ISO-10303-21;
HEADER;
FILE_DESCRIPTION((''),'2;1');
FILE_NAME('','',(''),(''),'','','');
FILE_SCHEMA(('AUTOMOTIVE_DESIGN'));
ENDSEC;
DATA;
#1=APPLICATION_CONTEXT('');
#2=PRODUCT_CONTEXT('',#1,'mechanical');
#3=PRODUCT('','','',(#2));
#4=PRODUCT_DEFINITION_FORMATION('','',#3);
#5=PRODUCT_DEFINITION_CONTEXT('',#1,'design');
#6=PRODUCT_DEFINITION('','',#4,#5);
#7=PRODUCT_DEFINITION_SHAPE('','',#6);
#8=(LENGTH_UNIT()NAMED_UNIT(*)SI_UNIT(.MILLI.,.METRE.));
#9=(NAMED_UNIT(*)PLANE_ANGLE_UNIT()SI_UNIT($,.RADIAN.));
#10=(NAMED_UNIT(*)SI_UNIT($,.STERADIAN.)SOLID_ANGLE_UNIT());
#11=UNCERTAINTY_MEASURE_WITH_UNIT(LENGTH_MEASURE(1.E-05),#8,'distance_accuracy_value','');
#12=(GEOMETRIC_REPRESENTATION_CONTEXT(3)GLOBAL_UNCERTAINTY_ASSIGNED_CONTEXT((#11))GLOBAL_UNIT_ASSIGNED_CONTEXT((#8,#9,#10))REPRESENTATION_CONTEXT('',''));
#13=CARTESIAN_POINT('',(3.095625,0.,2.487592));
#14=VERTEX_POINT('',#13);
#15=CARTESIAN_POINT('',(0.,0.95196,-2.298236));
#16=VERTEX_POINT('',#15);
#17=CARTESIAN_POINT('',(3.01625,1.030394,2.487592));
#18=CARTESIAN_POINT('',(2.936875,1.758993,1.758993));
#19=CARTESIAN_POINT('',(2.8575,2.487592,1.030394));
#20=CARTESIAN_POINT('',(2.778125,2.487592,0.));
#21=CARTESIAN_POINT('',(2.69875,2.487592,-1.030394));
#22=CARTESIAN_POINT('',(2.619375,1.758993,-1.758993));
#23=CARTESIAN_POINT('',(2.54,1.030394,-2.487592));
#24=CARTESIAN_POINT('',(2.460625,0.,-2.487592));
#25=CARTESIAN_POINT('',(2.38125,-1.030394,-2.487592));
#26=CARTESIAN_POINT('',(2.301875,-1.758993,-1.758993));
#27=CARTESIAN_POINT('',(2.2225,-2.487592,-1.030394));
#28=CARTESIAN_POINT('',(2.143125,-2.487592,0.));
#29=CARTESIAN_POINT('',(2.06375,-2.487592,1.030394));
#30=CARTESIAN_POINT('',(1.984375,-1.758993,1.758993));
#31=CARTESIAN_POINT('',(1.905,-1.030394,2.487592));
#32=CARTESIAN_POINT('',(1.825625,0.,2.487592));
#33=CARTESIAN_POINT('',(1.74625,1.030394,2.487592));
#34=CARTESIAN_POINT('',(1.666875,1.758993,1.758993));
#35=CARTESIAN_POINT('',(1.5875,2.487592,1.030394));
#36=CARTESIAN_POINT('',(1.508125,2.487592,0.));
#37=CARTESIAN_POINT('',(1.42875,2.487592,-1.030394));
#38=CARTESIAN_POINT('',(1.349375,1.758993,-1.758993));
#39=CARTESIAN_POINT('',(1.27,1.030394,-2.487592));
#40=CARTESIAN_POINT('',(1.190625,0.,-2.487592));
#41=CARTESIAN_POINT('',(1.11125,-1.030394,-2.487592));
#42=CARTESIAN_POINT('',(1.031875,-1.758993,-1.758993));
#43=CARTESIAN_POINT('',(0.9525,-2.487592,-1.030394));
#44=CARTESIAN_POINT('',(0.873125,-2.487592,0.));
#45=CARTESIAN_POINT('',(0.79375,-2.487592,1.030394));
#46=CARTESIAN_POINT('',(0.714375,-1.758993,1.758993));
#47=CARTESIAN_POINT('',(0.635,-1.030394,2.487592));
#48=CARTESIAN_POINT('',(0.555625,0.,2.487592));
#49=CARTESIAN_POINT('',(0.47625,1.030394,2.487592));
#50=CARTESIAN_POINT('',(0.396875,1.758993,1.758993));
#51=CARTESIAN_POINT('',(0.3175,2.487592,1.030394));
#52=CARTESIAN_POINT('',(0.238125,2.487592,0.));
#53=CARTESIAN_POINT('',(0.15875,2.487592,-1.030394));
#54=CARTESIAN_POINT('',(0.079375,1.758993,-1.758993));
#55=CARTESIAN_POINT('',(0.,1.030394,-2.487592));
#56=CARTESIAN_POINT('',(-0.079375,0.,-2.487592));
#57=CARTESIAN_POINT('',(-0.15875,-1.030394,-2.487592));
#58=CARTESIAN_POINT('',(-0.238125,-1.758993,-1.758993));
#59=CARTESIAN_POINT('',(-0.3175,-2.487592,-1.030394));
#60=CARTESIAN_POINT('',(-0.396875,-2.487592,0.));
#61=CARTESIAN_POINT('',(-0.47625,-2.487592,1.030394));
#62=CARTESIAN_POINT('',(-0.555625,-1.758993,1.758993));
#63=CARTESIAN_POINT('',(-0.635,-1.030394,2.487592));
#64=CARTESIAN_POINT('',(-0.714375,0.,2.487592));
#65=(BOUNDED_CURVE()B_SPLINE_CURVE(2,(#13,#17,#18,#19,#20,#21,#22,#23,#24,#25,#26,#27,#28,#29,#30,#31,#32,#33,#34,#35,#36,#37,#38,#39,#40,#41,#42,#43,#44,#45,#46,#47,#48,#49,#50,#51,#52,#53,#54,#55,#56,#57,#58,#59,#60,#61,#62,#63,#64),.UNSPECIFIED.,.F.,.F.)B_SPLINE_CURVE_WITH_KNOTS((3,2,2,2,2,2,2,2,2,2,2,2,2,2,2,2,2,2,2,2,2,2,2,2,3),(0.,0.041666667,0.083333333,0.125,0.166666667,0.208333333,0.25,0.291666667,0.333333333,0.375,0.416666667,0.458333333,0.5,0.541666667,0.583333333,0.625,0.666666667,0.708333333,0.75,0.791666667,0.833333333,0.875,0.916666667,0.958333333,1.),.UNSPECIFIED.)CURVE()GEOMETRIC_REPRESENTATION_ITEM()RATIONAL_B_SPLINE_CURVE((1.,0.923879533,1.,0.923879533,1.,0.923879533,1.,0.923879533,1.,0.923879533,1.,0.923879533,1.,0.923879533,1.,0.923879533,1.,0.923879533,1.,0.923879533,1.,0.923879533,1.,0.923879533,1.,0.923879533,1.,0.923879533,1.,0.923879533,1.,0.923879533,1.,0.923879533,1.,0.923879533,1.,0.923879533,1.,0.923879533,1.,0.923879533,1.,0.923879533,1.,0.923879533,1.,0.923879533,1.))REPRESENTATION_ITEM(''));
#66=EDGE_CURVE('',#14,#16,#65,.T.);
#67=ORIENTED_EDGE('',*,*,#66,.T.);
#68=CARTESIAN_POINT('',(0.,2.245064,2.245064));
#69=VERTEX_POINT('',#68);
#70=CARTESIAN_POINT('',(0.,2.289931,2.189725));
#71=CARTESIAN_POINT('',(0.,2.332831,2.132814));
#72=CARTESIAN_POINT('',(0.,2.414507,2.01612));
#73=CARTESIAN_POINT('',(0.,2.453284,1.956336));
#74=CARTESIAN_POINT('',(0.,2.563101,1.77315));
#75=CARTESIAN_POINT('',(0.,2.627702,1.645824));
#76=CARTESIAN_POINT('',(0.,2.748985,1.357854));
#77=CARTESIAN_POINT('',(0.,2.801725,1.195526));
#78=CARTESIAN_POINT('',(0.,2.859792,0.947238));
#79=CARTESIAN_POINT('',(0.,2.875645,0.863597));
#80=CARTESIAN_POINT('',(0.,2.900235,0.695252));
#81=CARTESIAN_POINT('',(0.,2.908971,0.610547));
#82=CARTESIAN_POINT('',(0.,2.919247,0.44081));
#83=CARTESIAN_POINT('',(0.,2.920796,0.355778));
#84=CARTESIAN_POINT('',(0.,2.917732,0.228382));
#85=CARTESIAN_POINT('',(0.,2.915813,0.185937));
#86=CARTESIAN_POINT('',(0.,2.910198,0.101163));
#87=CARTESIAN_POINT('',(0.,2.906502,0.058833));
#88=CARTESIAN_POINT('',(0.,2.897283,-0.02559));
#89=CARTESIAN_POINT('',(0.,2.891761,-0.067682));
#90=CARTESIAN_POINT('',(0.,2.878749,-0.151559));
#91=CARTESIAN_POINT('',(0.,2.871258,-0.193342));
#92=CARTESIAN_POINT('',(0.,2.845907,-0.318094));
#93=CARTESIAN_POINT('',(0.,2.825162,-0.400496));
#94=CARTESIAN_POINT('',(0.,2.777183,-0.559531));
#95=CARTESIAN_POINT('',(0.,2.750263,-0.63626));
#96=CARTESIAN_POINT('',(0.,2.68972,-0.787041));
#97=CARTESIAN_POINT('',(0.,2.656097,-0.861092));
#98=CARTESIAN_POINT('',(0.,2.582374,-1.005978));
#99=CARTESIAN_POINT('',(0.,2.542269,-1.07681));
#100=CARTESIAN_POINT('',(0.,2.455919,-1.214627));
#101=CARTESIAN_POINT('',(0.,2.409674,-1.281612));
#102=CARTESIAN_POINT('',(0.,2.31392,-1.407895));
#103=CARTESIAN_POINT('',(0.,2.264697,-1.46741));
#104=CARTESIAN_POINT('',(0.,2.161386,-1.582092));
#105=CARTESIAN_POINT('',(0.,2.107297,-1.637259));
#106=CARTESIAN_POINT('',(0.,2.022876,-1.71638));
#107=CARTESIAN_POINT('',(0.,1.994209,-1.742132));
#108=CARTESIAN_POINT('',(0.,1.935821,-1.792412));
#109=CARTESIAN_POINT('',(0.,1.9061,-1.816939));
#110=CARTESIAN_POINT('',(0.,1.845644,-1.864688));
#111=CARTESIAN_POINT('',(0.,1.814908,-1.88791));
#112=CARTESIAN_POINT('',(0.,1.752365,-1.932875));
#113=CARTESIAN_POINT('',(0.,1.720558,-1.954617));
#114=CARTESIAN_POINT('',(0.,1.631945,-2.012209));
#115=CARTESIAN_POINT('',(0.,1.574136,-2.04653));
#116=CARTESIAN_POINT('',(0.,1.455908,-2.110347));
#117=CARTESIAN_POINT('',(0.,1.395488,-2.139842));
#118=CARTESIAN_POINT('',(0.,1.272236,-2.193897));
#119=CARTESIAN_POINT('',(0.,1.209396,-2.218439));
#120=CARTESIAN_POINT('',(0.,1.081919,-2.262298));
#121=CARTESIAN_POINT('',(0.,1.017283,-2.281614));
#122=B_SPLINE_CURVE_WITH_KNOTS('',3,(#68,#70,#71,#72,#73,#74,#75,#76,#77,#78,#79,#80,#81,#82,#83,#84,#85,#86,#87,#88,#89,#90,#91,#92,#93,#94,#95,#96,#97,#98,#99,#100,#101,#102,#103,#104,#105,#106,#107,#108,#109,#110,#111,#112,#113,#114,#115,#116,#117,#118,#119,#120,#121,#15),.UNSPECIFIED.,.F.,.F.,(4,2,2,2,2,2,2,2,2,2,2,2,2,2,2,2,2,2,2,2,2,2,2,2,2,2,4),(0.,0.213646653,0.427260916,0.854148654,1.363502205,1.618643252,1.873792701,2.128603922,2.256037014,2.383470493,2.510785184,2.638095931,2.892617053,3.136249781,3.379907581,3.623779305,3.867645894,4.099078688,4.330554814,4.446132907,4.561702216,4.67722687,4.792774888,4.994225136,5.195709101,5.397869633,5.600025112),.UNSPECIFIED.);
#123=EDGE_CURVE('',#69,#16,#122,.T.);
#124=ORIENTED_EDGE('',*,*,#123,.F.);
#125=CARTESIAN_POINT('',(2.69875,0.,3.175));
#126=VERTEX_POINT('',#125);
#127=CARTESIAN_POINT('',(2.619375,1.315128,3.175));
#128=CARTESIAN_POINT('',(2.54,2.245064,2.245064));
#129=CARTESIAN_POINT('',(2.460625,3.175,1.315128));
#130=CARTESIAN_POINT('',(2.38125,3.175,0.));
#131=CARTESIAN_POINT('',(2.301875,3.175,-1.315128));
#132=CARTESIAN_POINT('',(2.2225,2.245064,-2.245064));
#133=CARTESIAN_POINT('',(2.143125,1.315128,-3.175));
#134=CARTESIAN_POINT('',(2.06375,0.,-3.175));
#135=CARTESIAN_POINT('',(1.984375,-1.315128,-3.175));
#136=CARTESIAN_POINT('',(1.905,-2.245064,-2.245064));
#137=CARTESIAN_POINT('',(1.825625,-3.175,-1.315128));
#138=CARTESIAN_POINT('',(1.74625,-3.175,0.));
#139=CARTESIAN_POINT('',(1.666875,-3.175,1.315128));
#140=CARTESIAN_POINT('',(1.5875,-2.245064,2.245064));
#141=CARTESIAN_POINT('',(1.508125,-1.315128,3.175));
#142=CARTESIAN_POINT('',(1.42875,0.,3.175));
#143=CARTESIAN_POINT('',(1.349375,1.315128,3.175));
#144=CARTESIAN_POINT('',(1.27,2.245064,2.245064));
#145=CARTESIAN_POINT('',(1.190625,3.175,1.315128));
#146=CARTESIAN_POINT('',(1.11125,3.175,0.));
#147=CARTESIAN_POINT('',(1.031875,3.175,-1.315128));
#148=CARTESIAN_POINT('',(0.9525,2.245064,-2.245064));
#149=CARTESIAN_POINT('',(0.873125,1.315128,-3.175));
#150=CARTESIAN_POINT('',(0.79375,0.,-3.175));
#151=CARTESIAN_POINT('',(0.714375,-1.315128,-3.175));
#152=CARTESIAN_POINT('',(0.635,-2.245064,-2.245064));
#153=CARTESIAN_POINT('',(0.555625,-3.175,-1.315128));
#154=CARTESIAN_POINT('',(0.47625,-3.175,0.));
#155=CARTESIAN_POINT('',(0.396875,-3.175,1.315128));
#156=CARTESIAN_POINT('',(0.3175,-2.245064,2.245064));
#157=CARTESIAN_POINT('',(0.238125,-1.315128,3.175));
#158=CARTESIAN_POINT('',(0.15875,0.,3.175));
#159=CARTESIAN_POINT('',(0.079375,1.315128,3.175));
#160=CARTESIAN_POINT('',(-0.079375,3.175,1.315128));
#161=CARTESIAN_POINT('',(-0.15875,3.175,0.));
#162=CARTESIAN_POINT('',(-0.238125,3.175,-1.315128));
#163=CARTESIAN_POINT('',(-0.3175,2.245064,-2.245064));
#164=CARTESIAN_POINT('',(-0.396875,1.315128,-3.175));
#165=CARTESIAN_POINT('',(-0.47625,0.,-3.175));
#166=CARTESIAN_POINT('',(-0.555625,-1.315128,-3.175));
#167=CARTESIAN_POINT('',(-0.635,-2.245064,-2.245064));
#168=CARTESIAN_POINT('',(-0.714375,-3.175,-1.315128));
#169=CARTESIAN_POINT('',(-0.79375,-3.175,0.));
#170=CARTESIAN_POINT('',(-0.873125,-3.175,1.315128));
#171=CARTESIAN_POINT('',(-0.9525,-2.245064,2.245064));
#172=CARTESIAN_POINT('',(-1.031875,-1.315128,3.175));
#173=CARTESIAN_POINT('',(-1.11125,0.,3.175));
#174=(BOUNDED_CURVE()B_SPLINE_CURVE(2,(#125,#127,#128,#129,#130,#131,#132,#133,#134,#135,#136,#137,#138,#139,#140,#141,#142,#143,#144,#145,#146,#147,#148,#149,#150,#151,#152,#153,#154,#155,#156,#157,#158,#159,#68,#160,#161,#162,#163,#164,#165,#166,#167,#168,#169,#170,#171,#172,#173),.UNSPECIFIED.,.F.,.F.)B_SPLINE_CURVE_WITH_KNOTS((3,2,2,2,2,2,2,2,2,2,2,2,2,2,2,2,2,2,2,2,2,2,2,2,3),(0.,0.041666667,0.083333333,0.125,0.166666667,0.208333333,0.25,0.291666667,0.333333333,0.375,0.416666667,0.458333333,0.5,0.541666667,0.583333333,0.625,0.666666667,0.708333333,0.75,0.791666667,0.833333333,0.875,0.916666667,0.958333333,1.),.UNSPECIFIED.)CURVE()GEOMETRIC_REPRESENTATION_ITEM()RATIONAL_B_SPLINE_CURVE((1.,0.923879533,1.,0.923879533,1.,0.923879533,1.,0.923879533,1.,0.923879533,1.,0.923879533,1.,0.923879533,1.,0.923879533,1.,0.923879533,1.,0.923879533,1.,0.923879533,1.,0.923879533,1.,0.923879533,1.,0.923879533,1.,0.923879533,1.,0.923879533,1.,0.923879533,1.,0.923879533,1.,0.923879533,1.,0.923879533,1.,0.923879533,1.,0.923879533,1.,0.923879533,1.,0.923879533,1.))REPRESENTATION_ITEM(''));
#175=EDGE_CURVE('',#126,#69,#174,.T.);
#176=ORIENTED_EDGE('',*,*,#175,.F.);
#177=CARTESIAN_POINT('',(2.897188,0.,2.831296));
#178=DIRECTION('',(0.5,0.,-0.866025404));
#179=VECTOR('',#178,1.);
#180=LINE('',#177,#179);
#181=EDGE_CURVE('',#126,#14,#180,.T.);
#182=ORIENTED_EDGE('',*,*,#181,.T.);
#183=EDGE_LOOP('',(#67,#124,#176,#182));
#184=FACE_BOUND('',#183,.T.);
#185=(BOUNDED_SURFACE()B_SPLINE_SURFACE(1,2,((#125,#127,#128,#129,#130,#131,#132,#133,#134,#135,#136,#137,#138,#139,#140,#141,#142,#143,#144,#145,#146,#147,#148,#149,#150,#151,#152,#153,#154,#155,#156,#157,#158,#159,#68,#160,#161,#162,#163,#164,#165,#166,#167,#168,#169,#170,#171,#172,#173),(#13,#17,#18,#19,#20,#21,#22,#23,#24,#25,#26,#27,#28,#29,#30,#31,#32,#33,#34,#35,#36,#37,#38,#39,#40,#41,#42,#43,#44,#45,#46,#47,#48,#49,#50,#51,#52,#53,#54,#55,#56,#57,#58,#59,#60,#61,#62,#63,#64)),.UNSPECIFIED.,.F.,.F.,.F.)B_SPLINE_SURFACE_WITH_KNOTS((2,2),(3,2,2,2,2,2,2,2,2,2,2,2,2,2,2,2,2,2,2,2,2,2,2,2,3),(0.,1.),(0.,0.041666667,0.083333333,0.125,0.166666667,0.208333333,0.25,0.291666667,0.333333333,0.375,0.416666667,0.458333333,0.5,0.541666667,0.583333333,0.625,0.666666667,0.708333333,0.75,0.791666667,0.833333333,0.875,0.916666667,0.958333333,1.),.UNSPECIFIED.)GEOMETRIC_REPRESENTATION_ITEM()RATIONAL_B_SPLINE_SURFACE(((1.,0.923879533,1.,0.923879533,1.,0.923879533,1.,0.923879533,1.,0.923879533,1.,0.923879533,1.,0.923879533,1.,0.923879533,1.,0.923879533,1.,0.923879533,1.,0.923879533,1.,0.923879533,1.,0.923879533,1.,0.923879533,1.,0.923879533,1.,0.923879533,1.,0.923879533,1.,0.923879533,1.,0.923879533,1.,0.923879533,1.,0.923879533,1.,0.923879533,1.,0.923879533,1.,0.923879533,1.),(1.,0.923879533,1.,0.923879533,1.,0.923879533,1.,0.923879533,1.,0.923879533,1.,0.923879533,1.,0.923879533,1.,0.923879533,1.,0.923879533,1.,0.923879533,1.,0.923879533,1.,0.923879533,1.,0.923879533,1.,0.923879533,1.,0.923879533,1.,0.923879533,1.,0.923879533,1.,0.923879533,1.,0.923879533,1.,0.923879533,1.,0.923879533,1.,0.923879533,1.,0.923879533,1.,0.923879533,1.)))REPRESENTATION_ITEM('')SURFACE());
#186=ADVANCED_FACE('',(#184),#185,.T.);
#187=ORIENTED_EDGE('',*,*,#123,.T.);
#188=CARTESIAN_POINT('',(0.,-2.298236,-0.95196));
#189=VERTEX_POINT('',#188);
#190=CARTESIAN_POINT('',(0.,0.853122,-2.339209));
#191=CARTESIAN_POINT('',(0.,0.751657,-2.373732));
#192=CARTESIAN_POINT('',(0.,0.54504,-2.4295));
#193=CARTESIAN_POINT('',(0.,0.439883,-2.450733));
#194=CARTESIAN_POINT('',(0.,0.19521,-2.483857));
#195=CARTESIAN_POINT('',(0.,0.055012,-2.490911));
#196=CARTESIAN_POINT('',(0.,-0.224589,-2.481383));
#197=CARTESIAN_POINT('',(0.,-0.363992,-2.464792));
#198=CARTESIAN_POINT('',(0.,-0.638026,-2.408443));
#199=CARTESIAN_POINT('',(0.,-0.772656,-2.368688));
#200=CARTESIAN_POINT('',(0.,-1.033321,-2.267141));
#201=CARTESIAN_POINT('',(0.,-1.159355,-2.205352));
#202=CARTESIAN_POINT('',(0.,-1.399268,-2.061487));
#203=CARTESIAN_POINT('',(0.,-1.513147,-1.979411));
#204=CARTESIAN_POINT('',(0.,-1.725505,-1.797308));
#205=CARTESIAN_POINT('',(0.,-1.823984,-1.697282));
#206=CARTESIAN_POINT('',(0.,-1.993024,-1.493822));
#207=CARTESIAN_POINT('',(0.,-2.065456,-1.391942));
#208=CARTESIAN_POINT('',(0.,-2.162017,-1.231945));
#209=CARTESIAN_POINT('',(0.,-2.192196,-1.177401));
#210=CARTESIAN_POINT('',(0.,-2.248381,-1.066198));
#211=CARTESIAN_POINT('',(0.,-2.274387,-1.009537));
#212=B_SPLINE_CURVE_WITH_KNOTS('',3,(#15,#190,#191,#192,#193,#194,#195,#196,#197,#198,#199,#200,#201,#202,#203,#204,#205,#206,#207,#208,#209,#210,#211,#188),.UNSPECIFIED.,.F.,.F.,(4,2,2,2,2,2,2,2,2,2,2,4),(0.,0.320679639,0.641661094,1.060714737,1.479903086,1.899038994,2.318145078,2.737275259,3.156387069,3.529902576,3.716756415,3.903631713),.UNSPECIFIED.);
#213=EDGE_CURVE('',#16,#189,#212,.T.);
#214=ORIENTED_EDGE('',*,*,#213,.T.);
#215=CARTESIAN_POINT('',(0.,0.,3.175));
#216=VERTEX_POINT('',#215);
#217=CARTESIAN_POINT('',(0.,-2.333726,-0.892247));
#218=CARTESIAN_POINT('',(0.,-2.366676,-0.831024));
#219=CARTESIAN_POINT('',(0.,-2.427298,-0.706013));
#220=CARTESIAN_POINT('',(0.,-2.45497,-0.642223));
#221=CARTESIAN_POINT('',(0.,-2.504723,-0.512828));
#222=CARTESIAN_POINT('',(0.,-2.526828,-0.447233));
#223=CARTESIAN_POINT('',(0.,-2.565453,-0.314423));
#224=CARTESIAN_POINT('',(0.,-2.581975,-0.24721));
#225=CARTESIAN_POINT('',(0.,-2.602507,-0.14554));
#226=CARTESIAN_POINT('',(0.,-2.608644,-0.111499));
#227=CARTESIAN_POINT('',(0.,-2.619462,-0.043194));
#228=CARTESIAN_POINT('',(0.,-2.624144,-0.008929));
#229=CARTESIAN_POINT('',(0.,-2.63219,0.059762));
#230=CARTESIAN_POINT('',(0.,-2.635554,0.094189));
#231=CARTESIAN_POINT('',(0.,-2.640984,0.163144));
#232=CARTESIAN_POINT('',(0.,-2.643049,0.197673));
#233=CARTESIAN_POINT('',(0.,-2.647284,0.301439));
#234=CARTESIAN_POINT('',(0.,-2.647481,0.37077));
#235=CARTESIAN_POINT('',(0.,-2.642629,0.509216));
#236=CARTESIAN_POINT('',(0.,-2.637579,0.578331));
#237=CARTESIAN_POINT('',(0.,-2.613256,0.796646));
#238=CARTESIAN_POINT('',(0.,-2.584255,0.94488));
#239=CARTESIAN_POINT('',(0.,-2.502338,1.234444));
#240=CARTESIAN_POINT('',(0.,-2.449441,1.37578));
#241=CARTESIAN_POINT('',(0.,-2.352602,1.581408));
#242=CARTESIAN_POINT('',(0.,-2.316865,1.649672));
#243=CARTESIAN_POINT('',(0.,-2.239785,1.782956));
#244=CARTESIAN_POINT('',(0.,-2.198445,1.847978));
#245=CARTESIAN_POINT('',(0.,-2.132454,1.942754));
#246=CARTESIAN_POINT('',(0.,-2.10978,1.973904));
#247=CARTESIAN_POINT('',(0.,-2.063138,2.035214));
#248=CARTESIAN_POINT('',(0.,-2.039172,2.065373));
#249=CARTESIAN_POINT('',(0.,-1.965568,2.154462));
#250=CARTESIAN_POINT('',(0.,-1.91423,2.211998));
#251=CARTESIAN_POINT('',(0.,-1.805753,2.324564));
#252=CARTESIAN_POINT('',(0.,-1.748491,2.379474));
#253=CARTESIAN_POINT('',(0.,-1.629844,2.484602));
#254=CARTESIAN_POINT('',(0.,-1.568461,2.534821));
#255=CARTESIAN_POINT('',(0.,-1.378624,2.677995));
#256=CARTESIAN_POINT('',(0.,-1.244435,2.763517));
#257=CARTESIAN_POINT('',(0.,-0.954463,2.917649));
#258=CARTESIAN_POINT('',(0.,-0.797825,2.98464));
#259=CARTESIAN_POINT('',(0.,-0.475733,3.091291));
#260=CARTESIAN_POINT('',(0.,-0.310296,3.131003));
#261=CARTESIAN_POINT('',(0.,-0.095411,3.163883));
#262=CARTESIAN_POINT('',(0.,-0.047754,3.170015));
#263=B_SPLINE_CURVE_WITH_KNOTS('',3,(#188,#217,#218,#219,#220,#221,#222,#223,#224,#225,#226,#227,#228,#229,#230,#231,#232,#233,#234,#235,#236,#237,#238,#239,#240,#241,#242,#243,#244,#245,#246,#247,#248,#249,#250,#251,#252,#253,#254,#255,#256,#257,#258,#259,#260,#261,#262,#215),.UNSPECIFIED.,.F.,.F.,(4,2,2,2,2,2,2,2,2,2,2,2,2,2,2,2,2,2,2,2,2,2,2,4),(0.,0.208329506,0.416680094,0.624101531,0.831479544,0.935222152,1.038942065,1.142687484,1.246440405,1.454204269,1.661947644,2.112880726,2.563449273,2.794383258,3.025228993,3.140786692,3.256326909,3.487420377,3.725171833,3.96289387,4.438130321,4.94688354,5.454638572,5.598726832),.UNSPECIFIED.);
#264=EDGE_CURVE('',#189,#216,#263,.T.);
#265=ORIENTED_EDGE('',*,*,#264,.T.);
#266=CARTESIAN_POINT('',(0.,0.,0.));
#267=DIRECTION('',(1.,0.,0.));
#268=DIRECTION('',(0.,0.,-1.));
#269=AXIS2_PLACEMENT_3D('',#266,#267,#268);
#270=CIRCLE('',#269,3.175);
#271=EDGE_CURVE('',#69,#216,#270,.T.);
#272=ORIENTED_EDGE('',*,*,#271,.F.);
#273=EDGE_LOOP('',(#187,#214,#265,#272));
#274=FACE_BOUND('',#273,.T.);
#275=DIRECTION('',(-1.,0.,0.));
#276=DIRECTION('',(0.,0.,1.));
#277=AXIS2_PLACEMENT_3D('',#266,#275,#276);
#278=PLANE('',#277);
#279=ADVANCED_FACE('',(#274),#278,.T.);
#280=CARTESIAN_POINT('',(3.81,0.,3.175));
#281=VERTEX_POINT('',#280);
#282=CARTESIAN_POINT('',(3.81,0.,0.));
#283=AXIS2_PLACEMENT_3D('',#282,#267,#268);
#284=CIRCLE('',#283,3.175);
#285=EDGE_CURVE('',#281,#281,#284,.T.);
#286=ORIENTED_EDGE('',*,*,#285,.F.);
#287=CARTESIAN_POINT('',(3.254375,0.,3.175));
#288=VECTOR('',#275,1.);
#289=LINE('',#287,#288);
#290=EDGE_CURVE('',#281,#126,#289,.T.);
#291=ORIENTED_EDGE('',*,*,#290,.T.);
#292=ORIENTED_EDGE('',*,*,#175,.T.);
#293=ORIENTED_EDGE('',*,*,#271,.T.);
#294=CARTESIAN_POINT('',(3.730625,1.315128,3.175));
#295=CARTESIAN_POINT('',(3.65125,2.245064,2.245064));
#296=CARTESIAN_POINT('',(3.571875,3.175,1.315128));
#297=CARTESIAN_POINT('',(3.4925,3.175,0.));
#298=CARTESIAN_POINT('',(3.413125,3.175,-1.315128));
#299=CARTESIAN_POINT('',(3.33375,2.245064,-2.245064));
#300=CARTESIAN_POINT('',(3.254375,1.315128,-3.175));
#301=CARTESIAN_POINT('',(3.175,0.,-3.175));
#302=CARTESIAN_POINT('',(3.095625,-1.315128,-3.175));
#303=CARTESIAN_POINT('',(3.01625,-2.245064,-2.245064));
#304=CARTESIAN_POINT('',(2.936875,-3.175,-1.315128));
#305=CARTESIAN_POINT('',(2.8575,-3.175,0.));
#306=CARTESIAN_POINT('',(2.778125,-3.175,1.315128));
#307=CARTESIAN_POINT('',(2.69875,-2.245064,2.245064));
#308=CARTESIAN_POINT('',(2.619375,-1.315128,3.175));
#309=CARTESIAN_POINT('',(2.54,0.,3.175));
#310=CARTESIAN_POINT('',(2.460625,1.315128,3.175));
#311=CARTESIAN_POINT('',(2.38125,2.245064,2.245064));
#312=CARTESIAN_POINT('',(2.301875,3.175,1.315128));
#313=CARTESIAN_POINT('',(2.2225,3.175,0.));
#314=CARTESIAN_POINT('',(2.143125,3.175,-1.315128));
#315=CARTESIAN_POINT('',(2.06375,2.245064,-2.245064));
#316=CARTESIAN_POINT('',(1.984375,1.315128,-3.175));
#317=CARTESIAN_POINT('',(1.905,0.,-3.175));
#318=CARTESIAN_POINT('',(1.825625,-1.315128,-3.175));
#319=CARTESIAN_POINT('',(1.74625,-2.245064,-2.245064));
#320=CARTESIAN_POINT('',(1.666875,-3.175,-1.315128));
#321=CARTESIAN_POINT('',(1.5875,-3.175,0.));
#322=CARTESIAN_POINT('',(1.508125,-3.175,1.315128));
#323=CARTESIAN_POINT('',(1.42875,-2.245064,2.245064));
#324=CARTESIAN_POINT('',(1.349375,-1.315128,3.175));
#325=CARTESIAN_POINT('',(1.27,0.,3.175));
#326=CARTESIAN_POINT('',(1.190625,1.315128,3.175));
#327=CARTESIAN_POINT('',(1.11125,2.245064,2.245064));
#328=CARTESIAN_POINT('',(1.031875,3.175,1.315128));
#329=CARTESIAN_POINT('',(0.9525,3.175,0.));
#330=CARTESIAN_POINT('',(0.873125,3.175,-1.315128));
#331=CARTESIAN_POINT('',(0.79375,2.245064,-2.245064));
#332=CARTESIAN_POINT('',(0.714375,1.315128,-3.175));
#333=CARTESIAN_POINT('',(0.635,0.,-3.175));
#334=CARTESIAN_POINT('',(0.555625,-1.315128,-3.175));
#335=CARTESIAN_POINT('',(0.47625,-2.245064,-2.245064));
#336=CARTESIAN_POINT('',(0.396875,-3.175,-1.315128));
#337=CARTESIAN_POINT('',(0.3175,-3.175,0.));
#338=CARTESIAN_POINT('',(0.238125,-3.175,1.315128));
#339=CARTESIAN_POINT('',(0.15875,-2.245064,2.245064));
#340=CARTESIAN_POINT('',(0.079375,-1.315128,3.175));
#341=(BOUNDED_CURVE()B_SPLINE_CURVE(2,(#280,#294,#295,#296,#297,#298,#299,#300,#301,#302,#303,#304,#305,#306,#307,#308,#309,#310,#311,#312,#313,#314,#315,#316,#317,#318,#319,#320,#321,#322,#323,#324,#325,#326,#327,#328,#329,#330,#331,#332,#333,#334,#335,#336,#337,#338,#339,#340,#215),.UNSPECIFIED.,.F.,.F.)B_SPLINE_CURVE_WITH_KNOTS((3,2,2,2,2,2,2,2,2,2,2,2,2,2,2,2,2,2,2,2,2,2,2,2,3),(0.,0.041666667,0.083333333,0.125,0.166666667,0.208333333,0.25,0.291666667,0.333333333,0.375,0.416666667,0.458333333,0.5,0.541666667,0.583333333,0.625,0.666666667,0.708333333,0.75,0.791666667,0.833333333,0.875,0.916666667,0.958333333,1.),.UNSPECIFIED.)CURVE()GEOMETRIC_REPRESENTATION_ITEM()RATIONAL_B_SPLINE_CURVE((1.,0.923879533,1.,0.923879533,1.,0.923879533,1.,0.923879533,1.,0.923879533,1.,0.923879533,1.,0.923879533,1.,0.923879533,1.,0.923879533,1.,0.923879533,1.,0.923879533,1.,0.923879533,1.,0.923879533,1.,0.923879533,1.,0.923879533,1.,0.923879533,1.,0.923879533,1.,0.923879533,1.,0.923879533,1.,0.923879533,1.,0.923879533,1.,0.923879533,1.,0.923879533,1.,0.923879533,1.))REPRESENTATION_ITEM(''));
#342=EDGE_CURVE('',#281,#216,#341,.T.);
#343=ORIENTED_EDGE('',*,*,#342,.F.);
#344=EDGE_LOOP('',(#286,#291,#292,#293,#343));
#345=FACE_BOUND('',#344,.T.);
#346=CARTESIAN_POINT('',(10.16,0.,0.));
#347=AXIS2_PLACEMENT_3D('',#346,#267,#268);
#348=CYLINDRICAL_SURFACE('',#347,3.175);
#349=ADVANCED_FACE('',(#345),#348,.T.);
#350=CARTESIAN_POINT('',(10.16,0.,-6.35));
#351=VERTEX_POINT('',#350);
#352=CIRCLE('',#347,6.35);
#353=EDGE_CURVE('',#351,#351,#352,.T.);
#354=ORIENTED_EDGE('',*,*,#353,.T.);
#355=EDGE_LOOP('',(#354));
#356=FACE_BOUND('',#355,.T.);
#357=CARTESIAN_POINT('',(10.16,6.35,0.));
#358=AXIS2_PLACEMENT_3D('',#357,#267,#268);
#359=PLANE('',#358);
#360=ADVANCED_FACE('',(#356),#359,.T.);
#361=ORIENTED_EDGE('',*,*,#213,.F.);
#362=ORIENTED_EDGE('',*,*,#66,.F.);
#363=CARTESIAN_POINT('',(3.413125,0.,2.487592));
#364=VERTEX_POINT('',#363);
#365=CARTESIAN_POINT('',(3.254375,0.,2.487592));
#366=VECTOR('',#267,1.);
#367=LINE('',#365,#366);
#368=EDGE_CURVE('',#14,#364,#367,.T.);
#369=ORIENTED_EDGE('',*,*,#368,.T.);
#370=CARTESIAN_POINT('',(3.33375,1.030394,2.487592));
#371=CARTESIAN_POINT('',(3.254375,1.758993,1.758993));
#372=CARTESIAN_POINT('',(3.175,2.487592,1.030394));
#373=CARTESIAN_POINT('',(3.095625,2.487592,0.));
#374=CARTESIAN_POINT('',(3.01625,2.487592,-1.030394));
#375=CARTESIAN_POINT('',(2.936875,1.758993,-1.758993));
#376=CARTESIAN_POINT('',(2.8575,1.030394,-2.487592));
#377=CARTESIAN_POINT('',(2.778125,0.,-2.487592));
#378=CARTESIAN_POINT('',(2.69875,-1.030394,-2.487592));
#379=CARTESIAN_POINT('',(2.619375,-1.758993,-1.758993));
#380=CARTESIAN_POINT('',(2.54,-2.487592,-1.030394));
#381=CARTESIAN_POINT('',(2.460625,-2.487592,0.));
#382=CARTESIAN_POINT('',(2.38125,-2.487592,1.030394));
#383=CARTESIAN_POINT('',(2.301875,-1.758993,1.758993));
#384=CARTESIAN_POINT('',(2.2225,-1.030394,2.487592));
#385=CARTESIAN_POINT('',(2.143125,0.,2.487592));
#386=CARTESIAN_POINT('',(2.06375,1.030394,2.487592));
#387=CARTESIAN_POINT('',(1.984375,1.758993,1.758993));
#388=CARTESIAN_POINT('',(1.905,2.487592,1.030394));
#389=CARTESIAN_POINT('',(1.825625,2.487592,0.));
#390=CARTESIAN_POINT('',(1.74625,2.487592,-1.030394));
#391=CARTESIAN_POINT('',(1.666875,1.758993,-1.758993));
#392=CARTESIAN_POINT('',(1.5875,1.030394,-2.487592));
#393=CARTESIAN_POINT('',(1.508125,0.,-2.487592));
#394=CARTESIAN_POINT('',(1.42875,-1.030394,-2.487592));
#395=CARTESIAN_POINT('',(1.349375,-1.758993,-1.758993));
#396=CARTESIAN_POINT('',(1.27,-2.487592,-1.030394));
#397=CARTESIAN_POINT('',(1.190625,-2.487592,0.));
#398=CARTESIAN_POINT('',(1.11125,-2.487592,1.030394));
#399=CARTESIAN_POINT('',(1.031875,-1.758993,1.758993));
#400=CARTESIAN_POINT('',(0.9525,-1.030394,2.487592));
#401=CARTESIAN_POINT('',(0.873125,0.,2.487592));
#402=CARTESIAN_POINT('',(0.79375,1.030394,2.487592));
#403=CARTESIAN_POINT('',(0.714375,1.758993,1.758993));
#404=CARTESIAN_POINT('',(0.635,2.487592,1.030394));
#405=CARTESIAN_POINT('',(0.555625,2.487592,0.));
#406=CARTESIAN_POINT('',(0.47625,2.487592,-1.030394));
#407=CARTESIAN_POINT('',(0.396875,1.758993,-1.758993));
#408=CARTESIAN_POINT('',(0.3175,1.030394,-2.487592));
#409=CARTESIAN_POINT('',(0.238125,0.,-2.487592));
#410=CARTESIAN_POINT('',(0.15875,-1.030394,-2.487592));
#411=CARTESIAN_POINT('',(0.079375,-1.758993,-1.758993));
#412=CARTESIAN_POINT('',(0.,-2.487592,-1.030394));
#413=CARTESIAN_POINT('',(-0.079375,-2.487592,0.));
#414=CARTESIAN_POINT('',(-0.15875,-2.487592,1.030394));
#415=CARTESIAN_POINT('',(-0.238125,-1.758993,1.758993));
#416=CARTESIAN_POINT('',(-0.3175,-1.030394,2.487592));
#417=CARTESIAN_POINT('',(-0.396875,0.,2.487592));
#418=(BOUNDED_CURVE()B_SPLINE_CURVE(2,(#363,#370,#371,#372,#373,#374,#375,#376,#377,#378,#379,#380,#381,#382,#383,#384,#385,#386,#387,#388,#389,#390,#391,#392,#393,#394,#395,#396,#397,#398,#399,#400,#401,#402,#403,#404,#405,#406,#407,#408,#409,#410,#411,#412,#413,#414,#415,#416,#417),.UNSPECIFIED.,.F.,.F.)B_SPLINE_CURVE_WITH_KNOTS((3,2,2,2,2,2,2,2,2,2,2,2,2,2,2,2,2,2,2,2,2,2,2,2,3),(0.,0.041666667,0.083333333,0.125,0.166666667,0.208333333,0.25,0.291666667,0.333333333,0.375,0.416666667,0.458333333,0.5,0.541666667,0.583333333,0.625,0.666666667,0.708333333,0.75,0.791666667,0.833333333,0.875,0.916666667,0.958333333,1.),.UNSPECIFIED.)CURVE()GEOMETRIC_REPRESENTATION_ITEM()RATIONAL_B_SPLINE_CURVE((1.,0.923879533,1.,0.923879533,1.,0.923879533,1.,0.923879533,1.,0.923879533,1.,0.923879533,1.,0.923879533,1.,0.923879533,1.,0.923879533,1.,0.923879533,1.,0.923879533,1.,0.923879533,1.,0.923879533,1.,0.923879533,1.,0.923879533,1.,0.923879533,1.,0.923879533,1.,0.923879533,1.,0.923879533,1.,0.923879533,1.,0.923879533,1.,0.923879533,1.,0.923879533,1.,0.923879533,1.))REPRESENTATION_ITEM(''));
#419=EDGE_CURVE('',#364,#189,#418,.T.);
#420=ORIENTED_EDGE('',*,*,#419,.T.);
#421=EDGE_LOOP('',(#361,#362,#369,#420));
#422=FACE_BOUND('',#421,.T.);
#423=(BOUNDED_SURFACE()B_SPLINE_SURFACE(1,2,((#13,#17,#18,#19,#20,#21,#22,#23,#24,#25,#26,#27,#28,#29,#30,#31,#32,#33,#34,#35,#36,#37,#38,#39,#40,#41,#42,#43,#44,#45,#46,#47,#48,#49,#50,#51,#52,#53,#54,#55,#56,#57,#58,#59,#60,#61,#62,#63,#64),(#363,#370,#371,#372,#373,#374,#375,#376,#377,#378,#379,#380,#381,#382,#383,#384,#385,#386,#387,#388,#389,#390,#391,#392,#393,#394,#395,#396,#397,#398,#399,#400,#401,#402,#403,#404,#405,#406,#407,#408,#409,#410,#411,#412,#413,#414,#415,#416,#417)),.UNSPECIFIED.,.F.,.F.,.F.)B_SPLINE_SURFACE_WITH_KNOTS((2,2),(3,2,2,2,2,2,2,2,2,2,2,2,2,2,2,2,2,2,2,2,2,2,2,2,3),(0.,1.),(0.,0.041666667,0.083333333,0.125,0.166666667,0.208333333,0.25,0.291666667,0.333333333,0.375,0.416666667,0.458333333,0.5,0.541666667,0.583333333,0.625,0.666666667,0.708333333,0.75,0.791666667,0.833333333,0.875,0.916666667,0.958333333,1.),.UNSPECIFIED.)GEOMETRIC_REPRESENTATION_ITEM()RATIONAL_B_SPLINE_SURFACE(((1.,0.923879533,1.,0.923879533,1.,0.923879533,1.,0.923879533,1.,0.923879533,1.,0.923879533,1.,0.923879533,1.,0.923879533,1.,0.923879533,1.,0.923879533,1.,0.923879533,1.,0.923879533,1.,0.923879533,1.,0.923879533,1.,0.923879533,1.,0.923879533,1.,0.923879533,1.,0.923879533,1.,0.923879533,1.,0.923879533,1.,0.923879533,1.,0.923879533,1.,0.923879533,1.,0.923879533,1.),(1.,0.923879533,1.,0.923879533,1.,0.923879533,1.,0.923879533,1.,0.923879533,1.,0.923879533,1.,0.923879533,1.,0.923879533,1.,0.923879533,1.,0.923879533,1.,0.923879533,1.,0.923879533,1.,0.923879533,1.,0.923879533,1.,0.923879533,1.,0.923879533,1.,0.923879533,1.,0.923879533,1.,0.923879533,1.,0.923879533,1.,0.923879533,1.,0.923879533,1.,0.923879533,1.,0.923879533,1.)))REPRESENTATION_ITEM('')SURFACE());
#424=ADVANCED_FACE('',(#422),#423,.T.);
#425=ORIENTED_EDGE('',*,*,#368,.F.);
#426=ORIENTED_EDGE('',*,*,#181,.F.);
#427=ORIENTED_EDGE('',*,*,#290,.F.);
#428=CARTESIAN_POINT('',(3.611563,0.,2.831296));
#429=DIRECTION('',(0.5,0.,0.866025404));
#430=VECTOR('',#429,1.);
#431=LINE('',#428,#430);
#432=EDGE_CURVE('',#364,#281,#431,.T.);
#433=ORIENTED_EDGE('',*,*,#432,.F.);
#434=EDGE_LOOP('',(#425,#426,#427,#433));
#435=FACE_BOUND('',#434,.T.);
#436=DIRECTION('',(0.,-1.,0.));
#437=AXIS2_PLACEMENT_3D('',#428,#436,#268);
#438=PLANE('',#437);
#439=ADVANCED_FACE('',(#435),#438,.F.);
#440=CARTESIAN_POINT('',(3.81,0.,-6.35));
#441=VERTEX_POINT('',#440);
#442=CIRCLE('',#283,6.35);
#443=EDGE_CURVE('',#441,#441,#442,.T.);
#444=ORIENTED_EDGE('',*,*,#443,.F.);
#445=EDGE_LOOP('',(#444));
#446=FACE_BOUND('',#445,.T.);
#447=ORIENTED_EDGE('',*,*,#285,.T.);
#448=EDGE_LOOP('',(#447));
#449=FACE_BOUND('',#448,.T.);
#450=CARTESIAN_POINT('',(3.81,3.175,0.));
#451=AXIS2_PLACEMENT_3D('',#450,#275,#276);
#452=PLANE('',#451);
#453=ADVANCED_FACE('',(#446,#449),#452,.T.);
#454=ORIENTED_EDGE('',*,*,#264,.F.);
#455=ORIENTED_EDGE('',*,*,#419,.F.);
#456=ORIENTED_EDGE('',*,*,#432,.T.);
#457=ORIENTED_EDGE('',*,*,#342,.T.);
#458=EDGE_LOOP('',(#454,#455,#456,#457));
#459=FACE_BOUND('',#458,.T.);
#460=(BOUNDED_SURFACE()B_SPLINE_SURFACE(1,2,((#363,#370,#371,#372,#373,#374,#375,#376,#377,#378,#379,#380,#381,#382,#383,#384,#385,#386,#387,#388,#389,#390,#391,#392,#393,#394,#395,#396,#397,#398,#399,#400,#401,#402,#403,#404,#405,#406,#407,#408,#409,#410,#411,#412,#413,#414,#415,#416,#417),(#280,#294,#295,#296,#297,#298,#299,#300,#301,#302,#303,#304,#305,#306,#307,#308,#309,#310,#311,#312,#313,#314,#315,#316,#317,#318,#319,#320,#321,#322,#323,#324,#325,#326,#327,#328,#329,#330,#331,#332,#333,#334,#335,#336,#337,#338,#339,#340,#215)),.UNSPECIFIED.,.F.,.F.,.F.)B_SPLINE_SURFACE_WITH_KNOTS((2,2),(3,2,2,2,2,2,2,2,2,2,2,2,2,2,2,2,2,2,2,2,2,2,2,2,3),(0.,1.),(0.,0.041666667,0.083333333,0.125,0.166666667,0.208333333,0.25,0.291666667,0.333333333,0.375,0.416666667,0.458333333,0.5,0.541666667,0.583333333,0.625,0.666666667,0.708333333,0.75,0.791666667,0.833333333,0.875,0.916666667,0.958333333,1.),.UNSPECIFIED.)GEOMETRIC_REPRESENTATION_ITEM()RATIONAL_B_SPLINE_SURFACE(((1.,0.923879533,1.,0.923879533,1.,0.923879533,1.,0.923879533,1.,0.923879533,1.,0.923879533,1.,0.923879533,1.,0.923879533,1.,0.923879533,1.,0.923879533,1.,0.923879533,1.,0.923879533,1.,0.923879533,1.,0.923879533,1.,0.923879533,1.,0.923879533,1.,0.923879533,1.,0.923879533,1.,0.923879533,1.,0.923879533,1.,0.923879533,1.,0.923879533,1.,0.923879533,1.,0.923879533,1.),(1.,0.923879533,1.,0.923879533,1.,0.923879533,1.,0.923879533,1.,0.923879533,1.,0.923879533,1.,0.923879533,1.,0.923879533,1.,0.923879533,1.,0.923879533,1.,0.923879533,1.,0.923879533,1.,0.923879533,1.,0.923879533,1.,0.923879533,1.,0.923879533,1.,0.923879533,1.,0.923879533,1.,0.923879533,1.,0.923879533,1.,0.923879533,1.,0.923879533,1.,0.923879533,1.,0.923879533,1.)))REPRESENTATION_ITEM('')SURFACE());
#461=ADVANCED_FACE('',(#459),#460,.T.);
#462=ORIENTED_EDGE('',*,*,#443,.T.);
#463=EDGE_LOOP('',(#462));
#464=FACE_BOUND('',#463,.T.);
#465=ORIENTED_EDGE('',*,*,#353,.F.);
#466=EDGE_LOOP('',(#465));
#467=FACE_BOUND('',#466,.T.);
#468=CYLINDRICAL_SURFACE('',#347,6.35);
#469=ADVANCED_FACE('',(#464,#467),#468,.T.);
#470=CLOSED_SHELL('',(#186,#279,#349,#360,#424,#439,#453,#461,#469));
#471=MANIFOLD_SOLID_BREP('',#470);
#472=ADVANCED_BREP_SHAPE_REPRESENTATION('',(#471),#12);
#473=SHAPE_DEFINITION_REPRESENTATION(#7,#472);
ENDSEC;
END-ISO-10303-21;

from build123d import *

# Parameters (mm, degrees)
THREAD1_PITCH = 1.27


with BuildPart() as part:
    # Sketch1 → Revolve1 (revolve)
    with BuildSketch(Plane.XY, mode=Mode.PRIVATE) as revolve1_sk:
        Polygon((0, 0), (0, 3.175), (3.81, 3.175), (3.81, 6.35), (10.16, 6.35), (10.16, 0), align=None)
    revolve(revolve1_sk.sketch.rotate(Axis((10.16, 0, 0), (-1, 0, 0)), 90), axis=Axis((10.16, 0, 0), (-1, 0, 0)))

    # Thread1: the profile of Thread Profile1 profile screwed along a right-hand helix of 3 turns, 8 arcs to a turn; built about Z, then put on its axis
    thread1_z = Axis((0, 0, 0), (0, 0, 1))
    thread1_corners = [(3.1753, 0, -0.000173205), (3.1753, 0, 1.111423202), (2.487592339, 0, 0.714374998), (2.487592339, 0, 0.396874998)]
    with BuildLine(mode=Mode.PRIVATE) as thread1_profile:
        Line(thread1_corners[0], thread1_corners[1])
        Line(thread1_corners[1], thread1_corners[2])
        Line(thread1_corners[2], thread1_corners[3])
        Line(thread1_corners[3], thread1_corners[0])
    thread1_cap = Face(thread1_profile.wire())
    thread1_turn_angles = [0, 22.5, 45, 67.5, 90, 112.5, 135, 157.5, 180, 202.5, 225, 247.5, 270, 292.5, 315, 337.5, 360]
    thread1_turn_weights = [1, 0.9238795325112867, 1, 0.9238795325112867, 1, 0.9238795325112867, 1, 0.9238795325112867, 1, 0.9238795325112867, 1, 0.9238795325112867, 1, 0.9238795325112867, 1, 0.9238795325112867, 1]
    thread1_turn_rails = [Edge.make_bspline([Vector(p[0], p[1], 0).rotate(thread1_z, thread1_turn_angles[k]) / thread1_turn_weights[k] + Vector(0, 0, p[2] + THREAD1_PITCH * thread1_turn_angles[k] / 360) for k in range(17)], [0, 0, 0, 1, 1, 2, 2, 3, 3, 4, 4, 5, 5, 6, 6, 7, 7, 8, 8, 8], 2, thread1_turn_weights) for p in thread1_corners]
    thread1_turn_sides = [Face.make_surface_from_curves(thread1_turn_rails[p[0]], thread1_turn_rails[p[1]]) for p in [(0, 1), (1, 2), (2, 3), (3, 0)]]
    thread1 = Plane(origin=(3.81, 0, 0), x_dir=(0, 0, 1), z_dir=(-1, 0, 0)) * Solid(Shell([*[p.moved(Location((0, 0, THREAD1_PITCH * i))) for i in range(3) for p in thread1_turn_sides], thread1_cap, thread1_cap.rotate(thread1_z, 1080).moved(Location((0, 0, THREAD1_PITCH * 1080 / 360)))]))
    add(thread1, mode=Mode.SUBTRACT)


solid = part.part
